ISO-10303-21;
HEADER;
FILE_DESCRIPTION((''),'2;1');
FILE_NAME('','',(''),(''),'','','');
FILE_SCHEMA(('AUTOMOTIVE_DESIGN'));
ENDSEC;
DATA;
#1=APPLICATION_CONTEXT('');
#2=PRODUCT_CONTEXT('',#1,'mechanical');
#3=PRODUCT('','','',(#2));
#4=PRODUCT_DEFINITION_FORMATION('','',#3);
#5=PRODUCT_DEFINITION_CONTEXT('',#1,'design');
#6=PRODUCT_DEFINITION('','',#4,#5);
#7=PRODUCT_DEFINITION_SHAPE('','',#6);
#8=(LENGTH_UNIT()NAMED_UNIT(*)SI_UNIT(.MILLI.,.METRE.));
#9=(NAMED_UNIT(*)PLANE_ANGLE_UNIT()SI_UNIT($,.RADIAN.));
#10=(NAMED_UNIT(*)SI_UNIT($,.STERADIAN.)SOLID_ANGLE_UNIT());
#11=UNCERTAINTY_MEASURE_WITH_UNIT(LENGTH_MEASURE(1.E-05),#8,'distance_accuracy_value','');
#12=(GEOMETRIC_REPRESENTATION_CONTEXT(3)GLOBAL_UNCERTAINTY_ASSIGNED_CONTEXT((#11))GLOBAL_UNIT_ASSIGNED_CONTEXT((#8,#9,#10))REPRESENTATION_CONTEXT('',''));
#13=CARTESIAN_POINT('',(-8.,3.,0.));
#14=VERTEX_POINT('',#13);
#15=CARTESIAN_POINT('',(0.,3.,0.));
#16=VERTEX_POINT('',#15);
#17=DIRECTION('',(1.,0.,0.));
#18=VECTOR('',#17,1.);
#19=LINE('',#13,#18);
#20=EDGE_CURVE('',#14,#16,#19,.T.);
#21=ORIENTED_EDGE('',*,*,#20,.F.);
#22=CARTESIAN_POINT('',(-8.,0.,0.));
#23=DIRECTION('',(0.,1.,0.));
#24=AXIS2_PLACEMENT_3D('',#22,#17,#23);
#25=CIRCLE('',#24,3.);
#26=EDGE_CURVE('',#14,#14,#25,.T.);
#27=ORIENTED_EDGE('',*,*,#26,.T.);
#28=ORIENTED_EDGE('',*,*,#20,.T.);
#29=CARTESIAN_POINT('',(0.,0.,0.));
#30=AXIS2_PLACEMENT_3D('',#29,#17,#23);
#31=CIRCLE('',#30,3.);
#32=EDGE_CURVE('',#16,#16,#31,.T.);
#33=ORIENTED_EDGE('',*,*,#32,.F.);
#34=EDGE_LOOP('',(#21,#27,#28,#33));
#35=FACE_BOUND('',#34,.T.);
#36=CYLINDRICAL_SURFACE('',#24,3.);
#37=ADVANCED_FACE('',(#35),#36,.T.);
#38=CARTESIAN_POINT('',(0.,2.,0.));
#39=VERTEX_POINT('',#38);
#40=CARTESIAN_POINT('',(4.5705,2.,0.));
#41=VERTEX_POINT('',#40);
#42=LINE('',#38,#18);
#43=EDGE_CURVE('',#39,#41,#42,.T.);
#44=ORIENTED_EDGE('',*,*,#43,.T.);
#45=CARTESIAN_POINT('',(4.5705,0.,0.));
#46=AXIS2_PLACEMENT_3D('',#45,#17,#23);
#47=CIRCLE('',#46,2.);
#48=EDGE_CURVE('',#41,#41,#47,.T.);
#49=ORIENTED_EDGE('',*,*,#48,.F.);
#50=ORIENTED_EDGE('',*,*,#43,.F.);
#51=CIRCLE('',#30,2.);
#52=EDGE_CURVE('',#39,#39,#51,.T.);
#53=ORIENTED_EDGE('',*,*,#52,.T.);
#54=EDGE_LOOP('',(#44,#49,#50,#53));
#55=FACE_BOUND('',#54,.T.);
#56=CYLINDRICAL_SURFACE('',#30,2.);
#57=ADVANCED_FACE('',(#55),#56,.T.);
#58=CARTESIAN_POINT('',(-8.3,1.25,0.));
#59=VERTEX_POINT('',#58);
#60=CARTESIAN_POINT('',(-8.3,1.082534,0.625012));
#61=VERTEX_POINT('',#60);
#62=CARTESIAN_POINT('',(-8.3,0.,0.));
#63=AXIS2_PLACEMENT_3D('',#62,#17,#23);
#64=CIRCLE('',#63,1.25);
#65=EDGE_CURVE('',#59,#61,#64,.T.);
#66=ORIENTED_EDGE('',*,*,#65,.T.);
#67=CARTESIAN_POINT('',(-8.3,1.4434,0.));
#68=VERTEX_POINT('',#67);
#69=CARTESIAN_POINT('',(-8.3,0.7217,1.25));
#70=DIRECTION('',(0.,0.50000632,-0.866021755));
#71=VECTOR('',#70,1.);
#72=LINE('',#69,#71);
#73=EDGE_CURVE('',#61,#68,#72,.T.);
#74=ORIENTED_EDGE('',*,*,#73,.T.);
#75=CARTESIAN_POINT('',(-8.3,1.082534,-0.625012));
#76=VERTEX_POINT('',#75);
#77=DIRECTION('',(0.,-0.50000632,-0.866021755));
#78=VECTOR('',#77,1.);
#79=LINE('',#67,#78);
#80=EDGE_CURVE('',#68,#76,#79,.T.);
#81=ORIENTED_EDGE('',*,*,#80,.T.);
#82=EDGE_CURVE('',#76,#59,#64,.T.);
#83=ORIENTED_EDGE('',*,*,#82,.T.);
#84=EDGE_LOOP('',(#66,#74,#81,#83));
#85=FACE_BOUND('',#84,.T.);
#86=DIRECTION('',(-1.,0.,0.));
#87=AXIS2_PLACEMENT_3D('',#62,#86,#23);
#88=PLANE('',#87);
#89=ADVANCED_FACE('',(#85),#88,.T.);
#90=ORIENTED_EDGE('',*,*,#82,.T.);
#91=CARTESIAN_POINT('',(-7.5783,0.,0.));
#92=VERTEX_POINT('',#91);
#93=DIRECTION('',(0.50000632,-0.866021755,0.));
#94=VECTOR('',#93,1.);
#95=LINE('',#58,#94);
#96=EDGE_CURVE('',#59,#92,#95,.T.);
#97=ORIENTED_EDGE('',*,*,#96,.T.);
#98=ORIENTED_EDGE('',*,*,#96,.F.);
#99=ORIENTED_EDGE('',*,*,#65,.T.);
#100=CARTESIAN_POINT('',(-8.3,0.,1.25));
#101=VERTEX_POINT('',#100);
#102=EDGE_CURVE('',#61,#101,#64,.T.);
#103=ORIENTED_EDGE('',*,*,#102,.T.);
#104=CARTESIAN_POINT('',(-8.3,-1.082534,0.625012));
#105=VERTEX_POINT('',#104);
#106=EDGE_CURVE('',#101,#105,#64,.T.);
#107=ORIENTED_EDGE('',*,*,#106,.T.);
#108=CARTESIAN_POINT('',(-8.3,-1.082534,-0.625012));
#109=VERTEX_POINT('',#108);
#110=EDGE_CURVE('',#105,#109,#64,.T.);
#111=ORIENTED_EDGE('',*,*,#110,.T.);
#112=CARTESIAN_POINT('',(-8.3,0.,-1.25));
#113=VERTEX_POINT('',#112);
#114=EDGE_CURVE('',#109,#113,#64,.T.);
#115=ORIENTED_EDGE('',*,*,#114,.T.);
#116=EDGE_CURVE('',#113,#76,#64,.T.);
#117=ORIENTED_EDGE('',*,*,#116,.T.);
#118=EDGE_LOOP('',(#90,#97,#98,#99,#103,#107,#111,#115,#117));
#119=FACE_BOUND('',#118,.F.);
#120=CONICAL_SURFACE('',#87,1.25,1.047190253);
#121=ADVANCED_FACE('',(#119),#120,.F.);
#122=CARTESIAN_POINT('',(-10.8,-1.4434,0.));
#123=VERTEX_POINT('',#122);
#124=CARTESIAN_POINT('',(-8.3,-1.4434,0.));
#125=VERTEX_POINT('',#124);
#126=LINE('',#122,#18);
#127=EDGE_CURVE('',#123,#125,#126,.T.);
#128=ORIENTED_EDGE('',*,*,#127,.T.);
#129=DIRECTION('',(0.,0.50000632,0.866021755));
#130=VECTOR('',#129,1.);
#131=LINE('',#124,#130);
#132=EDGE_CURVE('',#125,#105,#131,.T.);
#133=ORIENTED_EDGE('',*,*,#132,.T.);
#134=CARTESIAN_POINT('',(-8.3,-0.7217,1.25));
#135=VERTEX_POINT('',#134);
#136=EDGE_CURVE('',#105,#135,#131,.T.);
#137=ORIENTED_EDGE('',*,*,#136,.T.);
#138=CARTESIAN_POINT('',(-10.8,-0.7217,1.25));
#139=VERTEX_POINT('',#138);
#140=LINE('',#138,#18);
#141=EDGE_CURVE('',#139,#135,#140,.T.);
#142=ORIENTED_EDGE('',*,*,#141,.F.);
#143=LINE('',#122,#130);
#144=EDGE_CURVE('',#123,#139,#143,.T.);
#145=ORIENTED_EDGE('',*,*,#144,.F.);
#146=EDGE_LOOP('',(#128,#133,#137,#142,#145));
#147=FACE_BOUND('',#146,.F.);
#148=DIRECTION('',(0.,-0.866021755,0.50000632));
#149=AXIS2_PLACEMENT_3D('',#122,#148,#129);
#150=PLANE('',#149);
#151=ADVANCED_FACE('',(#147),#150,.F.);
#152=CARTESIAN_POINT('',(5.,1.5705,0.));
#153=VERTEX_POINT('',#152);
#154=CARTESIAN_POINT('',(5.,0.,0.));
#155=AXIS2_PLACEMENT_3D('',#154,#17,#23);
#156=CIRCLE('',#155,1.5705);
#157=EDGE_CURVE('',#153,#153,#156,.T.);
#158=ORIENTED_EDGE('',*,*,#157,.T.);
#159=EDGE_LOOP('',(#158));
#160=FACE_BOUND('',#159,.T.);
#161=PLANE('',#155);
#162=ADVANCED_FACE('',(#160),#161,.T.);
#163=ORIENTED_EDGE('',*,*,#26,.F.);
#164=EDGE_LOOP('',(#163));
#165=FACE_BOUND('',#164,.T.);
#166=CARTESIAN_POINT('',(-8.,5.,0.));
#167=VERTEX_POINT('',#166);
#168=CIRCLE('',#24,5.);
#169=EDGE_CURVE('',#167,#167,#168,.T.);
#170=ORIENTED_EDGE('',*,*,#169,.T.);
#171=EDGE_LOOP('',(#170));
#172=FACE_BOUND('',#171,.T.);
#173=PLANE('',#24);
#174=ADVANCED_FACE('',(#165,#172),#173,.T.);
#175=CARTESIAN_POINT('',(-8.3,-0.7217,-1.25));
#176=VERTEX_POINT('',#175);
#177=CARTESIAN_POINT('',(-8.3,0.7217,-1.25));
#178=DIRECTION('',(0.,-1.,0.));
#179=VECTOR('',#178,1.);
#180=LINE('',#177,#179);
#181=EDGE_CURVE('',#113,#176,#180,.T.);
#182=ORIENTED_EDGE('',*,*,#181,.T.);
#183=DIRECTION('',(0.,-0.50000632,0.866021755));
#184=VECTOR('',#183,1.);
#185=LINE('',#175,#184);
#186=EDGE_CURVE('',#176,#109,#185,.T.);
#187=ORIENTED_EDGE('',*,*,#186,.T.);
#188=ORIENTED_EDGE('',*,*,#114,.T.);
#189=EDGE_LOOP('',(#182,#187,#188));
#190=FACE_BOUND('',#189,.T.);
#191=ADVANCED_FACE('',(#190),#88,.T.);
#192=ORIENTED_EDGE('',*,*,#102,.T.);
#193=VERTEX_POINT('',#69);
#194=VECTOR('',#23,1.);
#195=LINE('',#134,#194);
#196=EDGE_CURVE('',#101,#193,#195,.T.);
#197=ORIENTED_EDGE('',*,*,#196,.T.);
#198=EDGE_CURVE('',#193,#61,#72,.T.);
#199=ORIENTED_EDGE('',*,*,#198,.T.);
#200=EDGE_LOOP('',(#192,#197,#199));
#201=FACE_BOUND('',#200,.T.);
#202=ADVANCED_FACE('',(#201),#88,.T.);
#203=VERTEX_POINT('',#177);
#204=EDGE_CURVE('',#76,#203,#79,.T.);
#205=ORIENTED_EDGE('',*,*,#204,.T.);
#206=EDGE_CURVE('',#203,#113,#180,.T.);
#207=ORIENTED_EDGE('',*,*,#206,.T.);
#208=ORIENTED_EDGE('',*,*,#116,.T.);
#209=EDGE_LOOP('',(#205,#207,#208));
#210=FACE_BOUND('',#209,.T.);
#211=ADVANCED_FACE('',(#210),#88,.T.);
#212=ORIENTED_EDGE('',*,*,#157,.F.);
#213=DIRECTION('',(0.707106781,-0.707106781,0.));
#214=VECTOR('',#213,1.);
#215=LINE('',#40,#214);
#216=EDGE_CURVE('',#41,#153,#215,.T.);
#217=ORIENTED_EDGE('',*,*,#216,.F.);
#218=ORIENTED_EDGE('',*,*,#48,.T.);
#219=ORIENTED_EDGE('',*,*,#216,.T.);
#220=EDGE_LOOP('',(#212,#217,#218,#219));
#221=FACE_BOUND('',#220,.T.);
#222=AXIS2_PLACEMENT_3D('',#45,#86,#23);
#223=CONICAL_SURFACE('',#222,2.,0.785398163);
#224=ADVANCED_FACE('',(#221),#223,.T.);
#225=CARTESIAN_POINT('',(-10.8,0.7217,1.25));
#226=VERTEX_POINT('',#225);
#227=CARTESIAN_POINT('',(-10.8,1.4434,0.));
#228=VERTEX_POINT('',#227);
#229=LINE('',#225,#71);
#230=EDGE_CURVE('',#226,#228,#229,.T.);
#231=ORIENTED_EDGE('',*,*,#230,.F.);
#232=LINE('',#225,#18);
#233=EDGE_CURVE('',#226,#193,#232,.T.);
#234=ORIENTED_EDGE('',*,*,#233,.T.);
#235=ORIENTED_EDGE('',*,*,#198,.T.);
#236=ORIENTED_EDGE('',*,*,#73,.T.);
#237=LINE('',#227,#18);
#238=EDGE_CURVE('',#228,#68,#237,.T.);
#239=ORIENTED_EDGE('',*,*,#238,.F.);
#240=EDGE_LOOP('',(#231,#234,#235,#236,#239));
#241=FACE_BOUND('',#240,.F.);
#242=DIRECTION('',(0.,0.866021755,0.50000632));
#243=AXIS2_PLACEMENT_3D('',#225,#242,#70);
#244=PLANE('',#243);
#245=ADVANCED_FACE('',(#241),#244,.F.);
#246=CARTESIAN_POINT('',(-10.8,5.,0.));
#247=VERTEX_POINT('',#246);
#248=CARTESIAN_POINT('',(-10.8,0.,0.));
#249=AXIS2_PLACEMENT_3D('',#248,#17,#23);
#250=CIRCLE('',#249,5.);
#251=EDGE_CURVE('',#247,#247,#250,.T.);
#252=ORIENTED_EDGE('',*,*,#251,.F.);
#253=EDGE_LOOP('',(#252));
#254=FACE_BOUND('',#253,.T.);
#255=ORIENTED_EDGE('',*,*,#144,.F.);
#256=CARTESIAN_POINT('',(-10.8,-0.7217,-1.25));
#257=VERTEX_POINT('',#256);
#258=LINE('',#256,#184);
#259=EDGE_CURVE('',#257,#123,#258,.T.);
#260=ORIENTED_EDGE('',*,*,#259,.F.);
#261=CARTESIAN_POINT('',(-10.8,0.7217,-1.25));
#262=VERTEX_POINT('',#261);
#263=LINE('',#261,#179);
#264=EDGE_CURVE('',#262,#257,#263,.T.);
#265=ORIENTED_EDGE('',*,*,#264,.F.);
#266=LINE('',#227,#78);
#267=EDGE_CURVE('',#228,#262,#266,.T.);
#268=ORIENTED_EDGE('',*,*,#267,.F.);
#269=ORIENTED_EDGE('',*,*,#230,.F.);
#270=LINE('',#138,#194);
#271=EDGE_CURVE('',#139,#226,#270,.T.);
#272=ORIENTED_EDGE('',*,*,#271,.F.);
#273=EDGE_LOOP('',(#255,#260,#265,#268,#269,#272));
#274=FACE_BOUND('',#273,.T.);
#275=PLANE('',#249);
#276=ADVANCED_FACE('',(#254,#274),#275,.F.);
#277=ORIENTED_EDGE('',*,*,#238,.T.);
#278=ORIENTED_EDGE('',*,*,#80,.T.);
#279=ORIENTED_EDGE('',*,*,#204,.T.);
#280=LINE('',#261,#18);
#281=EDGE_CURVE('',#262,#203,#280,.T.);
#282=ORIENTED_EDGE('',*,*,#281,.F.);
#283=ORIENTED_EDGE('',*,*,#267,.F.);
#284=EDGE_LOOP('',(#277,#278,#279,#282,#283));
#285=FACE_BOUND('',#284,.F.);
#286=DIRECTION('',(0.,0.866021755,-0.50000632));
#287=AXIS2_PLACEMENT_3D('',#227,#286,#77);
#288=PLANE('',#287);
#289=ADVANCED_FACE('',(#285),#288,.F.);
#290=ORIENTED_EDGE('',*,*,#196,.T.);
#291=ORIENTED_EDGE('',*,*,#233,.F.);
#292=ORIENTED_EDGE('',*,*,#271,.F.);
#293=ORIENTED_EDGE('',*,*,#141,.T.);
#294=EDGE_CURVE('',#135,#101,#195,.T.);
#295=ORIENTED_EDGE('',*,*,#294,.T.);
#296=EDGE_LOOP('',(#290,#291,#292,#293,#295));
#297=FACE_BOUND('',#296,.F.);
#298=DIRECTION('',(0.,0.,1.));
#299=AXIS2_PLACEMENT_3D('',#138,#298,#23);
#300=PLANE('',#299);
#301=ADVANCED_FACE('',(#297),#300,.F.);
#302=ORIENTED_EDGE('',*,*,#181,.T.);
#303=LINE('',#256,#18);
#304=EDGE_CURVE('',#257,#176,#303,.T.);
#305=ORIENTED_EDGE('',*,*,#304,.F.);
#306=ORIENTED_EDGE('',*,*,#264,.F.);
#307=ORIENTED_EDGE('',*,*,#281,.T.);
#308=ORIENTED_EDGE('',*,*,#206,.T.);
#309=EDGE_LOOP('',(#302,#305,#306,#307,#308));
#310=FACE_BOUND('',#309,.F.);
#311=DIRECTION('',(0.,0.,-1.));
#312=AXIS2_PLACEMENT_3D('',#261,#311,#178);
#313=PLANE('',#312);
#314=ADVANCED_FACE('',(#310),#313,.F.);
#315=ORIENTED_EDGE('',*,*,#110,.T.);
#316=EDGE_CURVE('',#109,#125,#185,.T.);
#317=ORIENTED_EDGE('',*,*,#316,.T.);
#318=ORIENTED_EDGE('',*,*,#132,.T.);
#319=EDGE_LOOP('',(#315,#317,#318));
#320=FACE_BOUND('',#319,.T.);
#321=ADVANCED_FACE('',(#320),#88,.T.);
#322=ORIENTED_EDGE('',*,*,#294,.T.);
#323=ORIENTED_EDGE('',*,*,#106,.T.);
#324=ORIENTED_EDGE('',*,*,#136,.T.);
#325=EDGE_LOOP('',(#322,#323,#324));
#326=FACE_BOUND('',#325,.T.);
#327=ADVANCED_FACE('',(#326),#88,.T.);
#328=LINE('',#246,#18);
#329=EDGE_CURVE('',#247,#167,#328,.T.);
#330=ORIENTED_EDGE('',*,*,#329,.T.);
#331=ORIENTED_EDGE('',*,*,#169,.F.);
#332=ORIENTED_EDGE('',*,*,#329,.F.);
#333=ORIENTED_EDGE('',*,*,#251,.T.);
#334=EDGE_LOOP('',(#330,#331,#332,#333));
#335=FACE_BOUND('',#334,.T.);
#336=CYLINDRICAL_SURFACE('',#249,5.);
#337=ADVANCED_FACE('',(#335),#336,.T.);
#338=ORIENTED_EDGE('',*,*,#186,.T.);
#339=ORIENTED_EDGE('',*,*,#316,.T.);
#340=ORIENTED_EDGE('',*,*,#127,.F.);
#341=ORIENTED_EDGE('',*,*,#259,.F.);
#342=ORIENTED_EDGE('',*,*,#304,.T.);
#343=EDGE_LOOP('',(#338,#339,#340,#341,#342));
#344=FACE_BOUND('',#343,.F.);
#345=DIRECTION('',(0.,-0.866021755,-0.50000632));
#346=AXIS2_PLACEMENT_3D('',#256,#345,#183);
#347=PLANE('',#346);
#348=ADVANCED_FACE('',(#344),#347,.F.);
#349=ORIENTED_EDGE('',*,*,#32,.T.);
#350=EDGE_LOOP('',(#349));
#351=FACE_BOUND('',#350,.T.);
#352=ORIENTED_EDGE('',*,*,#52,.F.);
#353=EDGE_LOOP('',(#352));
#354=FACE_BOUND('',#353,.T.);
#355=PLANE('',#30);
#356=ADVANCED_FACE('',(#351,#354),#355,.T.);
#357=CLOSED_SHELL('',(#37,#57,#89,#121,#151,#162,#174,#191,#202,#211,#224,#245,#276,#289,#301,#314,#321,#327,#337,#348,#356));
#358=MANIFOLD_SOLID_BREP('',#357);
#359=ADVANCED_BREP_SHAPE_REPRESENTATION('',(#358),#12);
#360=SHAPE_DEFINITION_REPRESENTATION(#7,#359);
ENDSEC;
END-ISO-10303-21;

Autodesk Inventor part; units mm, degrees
ref_plane "YZ Plane" through (0, 0, 0) normal (1, 0, 0) x (0, 1, 0)
ref_plane "XZ Plane" through (0, 0, 0) normal (0, 1, 0) x (-1, 0, 0)
ref_plane "XY Plane" through (0, 0, 0) normal (0, 0, 1) x (1, 0, 0)
sketch "Sketch_1" plane through (0, 0, 0) normal (0, 0, 1) x (1, 0, 0)
  line L0 (5, 0) -> (-10.8, 0)
  line L1 (-10.8, 0) -> (-10.8, 5)
  line L2 (-10.8, 5) -> (-8, 5)
  line L3 (-8, 5) -> (-8, 3)
  line L4 (-8, 3) -> (0, 3)
  line L5 (0, 3) -> (0, 2)
  line L6 (0, 2) -> (4.5705, 2)
  line L7 (4.5705, 2) -> (5, 1.5705)
  line L8 (5, 1.5705) -> (5, 0)
  line L9 (5, 0) -> (-10.8, 0)
revolve "Revolution1" add sketch "Sketch_1" angle 360 about axis through (5, 0, 0) along (1, 0, 0)
thread "Thread1" size "M4x0.7" class "6g" standard "ISO Metric profile" length 3.3705
sketch "Sketch_2" plane through (-10.8, 0, 0) normal (-1, 0, 0) x (0, 1, 0)
  line L0 (-1.4434, 0) -> (-0.7217, -1.25)
  line L1 (-0.7217, -1.25) -> (0.7217, -1.25)
  line L2 (0.7217, -1.25) -> (1.4434, 0)
  line L3 (1.4434, 0) -> (0.7217, 1.25)
  line L4 (0.7217, 1.25) -> (-0.7217, 1.25)
  line L5 (-0.7217, 1.25) -> (-1.4434, 0)
extrude "Extrusion1" cut sketch "Sketch_2" against normal blind 2.5
sketch "Sketch_3" plane through (0, 0, 0) normal (0, 0, 1) x (1, 0, 0)
  line L0 (-7.5783, 0) -> (-8.3, 0)
  line L1 (-8.3, 0) -> (-8.3, 1.25)
  line L2 (-8.3, 1.25) -> (-7.5783, 0)
  line L3 (-7.5783, 0) -> (-8.3, 0)
revolve "Revolution2" cut sketch "Sketch_3" angle 360 about axis through (-7.5783, 0, 0) along (1, 0, 0)
properties part number "DBB4-8-5" material "스테인리스스틸"
